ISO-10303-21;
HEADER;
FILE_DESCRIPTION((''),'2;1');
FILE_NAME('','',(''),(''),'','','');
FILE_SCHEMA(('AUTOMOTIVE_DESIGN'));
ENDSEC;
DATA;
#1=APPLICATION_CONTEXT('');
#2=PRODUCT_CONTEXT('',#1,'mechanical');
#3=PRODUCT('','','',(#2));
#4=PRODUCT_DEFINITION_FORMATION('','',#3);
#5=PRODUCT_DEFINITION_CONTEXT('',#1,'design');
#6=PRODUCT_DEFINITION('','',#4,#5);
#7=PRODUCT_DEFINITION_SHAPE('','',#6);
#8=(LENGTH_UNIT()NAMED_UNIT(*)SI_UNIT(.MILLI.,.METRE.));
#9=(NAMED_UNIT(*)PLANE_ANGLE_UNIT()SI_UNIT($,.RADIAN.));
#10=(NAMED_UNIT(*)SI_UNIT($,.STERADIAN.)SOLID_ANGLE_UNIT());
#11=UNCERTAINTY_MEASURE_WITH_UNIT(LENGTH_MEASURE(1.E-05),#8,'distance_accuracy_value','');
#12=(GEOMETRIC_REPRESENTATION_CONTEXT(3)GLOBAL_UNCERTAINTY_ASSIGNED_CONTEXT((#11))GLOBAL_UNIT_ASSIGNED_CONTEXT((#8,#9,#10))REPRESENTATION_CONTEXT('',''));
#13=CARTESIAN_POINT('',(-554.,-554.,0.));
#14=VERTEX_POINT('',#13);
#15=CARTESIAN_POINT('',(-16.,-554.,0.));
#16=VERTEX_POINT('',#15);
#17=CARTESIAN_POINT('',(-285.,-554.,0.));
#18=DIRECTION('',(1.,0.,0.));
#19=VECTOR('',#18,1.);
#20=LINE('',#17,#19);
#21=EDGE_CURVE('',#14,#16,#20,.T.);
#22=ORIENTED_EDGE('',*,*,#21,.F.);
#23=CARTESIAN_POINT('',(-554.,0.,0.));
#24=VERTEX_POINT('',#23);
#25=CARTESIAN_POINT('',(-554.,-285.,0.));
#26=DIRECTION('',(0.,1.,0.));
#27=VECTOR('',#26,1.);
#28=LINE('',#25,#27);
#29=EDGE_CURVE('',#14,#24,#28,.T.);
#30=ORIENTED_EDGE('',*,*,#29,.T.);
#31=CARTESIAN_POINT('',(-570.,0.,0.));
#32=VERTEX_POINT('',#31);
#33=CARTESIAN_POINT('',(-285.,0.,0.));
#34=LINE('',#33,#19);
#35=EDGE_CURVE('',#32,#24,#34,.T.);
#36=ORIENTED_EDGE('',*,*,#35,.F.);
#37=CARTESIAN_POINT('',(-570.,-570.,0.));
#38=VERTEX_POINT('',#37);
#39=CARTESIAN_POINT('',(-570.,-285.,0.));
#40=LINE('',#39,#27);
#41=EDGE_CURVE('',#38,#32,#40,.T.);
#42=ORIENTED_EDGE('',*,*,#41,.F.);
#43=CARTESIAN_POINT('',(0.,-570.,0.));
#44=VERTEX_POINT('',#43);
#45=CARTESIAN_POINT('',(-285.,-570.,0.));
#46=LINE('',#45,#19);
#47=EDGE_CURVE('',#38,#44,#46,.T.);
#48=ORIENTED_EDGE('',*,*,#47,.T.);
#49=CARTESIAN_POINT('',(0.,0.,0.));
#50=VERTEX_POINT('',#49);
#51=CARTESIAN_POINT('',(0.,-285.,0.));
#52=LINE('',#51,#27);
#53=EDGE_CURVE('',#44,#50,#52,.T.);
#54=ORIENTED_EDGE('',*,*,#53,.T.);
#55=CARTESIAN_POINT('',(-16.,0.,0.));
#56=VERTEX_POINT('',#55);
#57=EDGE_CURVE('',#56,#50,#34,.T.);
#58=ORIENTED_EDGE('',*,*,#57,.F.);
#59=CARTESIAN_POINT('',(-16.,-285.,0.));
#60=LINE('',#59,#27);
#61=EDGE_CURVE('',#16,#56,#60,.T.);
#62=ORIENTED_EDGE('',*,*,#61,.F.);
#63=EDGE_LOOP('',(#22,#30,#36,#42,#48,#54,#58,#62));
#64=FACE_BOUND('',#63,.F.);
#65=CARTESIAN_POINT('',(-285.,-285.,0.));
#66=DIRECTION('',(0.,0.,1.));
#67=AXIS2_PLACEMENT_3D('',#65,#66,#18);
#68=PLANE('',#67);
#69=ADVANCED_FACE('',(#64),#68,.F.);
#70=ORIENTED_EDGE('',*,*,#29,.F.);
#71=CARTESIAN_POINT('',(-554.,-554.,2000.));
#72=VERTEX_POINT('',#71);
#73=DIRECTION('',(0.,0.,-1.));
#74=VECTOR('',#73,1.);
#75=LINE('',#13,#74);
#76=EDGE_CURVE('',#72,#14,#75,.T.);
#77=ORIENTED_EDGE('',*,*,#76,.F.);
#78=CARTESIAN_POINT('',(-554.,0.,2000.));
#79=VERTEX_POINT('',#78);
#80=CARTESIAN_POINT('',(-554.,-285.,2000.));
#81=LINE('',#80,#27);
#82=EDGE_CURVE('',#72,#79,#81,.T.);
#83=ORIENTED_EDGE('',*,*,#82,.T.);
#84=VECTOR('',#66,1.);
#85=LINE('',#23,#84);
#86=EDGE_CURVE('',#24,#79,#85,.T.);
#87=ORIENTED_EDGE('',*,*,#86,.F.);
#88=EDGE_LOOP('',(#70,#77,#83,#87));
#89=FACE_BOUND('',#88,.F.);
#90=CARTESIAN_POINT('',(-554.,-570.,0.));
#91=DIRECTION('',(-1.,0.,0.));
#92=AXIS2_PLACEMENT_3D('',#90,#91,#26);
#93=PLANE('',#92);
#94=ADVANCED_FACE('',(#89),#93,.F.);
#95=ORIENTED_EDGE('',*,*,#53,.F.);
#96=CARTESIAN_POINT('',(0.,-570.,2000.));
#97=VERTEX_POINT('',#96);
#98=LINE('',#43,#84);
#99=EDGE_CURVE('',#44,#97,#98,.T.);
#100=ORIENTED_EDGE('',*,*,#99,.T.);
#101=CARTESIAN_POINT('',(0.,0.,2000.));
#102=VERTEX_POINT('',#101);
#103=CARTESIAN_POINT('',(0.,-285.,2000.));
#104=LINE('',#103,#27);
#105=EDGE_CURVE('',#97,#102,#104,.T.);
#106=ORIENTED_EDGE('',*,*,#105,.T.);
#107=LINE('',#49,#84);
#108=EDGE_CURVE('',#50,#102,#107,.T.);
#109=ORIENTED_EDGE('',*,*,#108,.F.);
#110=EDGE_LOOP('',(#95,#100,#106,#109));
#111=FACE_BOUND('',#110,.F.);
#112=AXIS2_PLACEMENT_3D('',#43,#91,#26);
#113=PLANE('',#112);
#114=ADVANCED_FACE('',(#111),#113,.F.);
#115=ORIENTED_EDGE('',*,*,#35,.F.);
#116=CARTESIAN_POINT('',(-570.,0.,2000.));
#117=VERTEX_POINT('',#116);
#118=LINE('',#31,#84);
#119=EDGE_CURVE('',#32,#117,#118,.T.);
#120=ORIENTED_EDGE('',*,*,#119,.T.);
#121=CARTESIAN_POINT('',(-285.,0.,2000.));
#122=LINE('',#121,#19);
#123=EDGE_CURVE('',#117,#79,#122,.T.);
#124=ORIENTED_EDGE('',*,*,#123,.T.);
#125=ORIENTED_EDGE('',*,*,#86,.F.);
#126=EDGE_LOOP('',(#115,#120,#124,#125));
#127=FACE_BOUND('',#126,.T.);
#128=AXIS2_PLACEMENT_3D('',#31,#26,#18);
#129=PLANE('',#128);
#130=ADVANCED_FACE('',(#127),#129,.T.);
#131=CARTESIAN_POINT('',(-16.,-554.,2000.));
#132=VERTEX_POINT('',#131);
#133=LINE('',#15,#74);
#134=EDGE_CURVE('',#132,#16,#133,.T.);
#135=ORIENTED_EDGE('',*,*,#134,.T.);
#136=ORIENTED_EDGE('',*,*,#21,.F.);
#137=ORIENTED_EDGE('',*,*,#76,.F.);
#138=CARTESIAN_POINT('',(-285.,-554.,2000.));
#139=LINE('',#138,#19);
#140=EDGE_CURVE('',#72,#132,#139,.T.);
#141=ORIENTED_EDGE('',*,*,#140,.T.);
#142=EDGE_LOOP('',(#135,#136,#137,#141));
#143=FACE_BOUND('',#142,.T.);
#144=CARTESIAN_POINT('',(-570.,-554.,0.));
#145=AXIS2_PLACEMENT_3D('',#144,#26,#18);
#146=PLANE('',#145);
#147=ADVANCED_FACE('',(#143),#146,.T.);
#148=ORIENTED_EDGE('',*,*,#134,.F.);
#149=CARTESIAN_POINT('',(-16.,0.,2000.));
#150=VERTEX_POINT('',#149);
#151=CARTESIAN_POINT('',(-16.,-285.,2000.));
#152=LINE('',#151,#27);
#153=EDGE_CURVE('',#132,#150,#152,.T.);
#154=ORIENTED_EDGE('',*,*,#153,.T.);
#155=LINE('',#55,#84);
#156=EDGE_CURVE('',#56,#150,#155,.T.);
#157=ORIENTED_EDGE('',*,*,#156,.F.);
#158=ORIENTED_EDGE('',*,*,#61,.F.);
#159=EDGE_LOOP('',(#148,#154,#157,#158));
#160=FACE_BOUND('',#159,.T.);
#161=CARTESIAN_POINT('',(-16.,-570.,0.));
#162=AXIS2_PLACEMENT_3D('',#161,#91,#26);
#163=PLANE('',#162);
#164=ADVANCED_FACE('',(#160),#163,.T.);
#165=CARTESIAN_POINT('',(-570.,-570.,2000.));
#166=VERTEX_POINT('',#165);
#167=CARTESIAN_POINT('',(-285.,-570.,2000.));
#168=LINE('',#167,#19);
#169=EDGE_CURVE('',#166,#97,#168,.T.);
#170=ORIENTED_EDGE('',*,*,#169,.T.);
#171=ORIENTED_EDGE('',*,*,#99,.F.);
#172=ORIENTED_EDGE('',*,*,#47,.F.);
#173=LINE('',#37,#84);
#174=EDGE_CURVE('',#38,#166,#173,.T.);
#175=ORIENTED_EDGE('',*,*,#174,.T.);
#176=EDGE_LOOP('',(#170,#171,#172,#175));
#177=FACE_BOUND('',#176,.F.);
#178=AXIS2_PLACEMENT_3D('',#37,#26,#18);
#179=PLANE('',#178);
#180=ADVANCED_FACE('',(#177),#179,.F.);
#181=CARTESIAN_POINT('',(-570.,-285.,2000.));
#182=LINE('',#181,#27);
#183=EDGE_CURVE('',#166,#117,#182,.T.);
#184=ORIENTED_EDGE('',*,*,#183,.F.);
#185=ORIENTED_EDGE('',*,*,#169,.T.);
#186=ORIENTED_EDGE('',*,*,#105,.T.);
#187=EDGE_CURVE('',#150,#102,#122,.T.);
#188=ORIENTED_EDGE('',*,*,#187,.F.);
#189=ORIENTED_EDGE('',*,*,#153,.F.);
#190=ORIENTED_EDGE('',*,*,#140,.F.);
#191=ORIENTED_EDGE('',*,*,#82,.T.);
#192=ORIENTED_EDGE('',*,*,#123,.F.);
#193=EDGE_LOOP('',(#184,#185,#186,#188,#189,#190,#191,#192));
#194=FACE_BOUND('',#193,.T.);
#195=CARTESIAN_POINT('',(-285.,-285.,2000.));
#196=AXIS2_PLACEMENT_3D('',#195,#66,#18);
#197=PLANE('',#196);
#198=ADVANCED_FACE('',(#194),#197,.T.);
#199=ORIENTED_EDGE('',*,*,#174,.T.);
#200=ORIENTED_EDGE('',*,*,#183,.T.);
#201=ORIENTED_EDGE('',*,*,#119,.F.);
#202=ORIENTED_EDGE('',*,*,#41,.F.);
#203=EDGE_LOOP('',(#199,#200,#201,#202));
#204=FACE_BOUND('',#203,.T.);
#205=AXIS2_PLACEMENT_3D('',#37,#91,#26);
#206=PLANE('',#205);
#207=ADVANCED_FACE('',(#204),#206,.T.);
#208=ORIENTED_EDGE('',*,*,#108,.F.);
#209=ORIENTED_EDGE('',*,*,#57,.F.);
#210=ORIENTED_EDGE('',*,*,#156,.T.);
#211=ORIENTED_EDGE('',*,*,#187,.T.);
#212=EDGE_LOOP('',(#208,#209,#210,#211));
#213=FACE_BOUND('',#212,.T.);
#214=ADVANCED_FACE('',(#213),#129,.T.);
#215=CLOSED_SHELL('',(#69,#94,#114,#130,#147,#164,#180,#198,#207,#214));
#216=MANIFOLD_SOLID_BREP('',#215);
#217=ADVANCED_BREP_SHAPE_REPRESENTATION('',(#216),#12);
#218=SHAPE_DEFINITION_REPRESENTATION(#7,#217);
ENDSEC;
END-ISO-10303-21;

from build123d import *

# Parameters (mm, degrees)
F0_W     = 570
F0_H     = 570
F1_DEPTH = 2000
F2_T     = -16


# Not quite as in the source:
# - a feature names something its author has since deleted; it is built from what else it names


with BuildPart() as f1:
    # F0 (on Top) → F1 (new body)
    with BuildSketch(Plane.XY):
        with Locations((-285, -285)):
            Rectangle(F0_W, F0_H)
    extrude(amount=F1_DEPTH)

    # F2
    f2_openings = [f1.faces().sort_by_distance(p)[0] for p in [
        (-285, 0, 1000),
        (-285, -285, 2000),
        (-285, -285, 0),
    ]]
    offset(amount=F2_T, openings=f2_openings)


solid = f1.part
